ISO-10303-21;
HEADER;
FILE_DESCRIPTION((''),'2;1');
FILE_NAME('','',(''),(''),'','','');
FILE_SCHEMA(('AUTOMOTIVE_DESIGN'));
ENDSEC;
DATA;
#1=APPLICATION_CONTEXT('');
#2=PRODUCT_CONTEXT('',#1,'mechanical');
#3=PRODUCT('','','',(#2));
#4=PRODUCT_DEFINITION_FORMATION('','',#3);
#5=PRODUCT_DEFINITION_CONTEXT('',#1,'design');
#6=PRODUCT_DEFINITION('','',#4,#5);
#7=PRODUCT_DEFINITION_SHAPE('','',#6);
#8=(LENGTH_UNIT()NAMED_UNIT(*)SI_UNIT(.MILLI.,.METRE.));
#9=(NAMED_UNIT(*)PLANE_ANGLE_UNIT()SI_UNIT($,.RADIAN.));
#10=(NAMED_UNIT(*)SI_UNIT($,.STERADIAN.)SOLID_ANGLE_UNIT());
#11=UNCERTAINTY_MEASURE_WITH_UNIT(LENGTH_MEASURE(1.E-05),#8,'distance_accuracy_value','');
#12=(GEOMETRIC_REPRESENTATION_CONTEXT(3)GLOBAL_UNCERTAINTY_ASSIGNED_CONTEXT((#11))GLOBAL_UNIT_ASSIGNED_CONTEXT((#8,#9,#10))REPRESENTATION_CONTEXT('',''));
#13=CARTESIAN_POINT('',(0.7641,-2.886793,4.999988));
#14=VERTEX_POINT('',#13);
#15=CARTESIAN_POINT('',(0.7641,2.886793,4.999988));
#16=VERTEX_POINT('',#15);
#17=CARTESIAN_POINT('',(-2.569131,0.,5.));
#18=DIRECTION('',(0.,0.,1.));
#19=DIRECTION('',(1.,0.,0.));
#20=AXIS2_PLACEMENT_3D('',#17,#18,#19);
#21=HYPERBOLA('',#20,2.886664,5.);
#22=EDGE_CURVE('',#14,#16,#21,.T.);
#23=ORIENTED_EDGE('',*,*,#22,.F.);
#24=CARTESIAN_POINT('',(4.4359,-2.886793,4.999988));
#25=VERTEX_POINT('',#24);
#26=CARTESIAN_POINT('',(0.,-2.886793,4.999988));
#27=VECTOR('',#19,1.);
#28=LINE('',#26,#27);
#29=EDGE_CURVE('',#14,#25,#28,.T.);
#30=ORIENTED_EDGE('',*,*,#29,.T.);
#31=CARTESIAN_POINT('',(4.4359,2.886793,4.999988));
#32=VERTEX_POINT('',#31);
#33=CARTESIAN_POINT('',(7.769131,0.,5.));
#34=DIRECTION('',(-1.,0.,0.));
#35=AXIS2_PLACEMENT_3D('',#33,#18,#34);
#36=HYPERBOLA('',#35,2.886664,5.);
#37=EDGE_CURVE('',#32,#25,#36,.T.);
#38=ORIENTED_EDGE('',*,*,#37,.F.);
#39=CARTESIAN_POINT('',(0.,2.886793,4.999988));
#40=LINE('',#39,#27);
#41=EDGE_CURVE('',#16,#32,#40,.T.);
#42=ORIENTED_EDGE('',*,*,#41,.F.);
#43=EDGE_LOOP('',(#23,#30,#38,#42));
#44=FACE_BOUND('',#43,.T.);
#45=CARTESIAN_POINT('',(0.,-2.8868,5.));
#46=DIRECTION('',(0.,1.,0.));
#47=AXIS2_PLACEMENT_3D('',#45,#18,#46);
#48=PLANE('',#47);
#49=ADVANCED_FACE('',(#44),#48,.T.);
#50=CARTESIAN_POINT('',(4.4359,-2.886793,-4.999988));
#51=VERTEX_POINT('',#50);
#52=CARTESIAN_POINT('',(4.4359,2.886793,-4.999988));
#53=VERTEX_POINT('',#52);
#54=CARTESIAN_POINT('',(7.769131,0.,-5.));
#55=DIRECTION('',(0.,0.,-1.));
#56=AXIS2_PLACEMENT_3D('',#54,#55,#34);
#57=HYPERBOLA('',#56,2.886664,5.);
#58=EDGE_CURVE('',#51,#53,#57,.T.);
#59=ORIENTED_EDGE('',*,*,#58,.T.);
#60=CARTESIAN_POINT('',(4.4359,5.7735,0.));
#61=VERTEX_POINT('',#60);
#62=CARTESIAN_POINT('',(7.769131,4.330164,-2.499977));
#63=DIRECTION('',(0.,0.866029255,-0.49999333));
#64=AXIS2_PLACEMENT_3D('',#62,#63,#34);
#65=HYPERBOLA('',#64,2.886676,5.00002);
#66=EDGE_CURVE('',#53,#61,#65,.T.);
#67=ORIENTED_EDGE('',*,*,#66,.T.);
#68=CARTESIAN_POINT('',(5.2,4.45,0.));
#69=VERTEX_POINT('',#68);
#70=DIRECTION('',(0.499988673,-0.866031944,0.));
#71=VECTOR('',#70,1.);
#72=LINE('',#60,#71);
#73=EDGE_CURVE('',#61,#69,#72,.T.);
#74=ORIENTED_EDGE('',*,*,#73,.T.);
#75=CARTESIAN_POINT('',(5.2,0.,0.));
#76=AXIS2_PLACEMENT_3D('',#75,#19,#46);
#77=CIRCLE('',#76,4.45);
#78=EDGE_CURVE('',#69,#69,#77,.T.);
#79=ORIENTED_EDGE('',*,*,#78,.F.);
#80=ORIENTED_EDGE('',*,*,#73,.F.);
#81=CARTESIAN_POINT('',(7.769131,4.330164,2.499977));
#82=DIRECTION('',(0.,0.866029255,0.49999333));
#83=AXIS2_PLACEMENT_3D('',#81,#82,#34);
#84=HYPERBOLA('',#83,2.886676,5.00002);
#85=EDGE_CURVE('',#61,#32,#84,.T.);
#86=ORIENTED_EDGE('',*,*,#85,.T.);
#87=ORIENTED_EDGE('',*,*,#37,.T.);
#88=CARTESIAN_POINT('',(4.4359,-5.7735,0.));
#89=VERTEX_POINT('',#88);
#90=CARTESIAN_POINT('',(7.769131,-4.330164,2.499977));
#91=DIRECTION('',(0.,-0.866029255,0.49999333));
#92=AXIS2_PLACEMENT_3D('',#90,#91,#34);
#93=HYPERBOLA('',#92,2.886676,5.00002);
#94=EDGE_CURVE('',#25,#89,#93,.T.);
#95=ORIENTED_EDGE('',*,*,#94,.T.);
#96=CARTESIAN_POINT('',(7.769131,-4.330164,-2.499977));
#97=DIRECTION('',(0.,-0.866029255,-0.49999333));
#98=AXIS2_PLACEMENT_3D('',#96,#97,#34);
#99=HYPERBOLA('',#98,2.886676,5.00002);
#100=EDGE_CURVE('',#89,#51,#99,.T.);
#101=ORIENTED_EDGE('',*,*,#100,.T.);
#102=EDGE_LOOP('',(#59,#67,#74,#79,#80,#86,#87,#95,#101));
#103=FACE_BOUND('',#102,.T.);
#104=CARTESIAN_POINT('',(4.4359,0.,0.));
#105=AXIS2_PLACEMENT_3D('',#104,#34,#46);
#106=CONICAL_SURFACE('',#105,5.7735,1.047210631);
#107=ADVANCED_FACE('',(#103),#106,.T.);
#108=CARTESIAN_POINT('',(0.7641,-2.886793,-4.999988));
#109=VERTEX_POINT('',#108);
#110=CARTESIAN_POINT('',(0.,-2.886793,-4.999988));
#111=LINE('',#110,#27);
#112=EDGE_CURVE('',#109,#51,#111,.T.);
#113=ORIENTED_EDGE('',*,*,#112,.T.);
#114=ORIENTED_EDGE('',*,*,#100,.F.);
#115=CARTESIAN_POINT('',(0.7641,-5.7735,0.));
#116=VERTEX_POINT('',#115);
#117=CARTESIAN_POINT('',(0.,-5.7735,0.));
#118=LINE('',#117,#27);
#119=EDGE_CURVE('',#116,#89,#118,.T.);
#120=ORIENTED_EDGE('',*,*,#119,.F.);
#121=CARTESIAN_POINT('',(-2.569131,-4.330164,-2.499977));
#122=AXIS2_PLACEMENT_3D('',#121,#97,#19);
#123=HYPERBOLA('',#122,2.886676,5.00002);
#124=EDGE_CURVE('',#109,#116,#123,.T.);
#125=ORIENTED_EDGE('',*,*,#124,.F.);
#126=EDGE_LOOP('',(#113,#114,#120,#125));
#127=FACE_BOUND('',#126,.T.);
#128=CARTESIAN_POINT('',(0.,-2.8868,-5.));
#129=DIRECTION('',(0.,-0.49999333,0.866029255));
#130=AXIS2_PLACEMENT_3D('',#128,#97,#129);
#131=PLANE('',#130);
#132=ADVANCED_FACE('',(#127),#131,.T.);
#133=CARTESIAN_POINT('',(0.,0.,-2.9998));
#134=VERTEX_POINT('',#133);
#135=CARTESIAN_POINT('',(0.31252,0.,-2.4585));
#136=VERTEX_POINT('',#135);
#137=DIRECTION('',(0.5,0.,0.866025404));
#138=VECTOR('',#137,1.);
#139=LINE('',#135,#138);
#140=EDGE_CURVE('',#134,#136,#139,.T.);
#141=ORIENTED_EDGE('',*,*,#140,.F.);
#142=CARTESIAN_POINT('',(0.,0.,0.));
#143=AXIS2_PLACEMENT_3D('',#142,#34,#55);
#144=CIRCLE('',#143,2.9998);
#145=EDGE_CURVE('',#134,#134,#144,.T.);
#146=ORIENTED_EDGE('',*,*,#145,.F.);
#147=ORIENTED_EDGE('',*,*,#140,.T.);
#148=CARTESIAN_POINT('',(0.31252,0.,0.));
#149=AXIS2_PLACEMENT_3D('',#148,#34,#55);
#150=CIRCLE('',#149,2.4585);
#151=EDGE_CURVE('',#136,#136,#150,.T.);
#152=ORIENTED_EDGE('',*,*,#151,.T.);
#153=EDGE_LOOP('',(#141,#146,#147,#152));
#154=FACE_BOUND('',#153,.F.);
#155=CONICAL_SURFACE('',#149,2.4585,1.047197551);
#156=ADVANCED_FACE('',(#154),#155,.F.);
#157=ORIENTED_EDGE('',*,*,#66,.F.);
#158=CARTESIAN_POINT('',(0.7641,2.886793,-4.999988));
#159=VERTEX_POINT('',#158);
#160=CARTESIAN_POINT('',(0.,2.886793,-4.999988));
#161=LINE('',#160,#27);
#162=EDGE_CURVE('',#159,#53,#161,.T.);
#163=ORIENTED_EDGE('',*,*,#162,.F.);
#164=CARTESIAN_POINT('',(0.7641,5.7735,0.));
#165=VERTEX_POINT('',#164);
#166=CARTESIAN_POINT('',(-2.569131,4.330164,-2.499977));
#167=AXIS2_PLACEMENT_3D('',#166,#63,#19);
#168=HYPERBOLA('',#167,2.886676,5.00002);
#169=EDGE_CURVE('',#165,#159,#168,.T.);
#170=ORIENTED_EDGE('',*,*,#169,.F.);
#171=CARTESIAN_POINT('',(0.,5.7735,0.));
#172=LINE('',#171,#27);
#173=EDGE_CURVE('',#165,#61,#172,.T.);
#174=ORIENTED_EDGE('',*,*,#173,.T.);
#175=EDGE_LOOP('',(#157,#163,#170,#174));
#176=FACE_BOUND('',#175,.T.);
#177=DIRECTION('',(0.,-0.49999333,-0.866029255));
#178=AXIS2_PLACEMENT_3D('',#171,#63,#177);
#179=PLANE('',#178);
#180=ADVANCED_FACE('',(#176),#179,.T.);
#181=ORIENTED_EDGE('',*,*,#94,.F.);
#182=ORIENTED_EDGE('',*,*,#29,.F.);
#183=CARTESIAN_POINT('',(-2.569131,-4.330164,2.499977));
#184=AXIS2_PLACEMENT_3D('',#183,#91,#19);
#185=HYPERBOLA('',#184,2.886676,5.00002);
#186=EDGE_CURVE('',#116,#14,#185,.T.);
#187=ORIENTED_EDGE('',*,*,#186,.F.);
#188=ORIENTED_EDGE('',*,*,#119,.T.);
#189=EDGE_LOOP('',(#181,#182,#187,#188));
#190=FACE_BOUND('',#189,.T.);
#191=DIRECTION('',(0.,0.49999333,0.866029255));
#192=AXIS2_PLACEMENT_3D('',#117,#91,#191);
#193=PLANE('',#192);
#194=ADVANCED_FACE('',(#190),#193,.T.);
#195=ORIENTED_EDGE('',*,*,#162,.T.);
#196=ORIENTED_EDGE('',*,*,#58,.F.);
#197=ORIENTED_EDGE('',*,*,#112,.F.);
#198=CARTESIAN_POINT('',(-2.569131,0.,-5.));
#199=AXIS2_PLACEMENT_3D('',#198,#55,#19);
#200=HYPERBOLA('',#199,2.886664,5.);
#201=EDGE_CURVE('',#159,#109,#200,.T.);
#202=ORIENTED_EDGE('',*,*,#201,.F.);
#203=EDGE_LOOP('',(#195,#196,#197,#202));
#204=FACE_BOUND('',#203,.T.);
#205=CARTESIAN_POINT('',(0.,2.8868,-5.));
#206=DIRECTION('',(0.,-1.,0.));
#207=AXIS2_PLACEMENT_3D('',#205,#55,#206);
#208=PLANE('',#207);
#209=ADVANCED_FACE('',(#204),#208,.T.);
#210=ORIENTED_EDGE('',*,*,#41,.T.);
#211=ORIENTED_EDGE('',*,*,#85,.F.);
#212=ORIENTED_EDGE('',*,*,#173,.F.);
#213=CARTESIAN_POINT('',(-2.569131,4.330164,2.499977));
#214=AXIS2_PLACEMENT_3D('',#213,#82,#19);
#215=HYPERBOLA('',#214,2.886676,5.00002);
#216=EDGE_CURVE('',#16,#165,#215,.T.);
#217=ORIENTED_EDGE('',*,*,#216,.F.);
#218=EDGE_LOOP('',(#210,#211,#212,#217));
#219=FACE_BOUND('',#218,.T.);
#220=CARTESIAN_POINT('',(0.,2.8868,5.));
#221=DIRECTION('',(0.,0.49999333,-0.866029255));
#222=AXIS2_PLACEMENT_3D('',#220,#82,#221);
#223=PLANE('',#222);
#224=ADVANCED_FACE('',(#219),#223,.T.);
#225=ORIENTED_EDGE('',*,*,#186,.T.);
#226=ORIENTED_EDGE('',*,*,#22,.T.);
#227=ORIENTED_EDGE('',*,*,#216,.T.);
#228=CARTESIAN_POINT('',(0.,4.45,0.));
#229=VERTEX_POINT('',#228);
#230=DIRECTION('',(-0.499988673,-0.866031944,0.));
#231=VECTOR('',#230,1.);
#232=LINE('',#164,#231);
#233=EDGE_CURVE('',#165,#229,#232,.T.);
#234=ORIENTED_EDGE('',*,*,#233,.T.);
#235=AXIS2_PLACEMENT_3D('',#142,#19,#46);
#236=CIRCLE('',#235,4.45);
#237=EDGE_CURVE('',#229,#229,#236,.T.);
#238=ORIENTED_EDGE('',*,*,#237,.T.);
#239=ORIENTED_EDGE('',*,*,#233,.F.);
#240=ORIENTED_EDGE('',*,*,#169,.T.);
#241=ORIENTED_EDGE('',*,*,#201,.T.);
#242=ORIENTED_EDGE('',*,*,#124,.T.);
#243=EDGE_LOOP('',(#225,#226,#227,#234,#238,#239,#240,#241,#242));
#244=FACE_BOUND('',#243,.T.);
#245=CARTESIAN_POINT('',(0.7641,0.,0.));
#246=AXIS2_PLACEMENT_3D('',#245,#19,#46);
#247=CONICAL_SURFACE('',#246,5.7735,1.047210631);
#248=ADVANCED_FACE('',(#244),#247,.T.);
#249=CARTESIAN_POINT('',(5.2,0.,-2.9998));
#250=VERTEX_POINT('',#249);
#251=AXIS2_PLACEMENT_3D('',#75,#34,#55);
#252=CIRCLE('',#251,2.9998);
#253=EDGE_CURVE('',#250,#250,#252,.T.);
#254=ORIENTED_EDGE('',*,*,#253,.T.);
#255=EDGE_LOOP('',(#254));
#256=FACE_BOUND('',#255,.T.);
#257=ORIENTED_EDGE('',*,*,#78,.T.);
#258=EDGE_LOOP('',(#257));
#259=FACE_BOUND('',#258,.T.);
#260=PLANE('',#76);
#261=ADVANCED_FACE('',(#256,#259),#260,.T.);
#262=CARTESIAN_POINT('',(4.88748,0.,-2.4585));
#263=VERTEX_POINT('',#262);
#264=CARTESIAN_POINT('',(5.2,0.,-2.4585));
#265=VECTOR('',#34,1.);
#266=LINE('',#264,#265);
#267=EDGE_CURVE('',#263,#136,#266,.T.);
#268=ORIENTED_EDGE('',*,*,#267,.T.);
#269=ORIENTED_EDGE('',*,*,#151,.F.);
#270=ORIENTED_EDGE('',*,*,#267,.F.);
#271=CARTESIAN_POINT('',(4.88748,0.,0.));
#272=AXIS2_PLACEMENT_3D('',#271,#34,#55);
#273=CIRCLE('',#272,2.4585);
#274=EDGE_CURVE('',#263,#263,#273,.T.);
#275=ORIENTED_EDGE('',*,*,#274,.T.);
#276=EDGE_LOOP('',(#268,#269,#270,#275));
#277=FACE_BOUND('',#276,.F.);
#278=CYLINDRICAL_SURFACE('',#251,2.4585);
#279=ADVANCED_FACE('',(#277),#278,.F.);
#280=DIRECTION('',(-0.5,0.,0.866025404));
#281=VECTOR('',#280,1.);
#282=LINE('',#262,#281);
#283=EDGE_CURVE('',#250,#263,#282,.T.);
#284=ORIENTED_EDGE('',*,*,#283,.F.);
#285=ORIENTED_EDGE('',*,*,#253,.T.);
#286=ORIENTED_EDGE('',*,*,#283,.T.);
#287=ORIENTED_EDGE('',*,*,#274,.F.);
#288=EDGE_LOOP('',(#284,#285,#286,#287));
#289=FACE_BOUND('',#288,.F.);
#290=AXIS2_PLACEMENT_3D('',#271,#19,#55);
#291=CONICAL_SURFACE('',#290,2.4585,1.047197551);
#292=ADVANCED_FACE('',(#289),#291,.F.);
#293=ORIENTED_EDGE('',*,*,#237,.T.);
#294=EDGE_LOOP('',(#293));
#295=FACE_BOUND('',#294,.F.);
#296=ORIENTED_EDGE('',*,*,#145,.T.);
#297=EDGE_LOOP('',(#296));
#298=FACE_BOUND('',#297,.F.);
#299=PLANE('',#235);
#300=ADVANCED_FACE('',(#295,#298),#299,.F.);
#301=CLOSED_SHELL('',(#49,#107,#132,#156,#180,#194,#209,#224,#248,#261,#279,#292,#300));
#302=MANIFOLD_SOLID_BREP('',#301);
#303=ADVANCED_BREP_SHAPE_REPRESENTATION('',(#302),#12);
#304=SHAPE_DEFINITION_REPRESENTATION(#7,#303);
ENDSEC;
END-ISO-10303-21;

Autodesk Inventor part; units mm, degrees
ref_plane "YZ Plane" through (0, 0, 0) normal (1, 0, 0) x (0, 1, 0)
ref_plane "XZ Plane" through (0, 0, 0) normal (0, 1, 0) x (-1, 0, 0)
sketch "Sketch1" plane through (0, 0, 0) normal (1, 0, 0) x (0, 1, 0)
  line L0 (-5.7735, 0) -> (-2.8868, 5)
  line L1 (-2.8868, 5) -> (2.8868, 5)
  line L2 (2.8868, 5) -> (5.7735, 0)
  line L3 (5.7735, 0) -> (2.8868, -5)
  line L4 (2.8868, -5) -> (-2.8868, -5)
  line L5 (-2.8868, -5) -> (-5.7735, 0)
  point P0 (0, 0)
  point P1 (0, 0)
  dimension "d0" = 11.547
extrude "Body" add sketch "Sketch1" along normal blind 5.2
sketch "Sketch2" plane through (0, 0, 0) normal (0, 0, 1) x (1, 0, 0)
  line L0 (0, 2.8868) -> (0, 5.7735) projected
  line L1 (0, 5.7735) -> (5.2, 5.7735) projected
  line L2 (5.2, 2.8868) -> (5.2, 5.7735) projected
  line L3 (-0.52, 0) -> (6.76, 0) projected
  line L4 (0.7641, 5.7735) -> (0, 4.45)
  line L5 (4.4359, 5.7735) -> (5.2, 4.45)
  dimension "d3" = 30
  dimension "d4" = 30
  dimension "d5" = 8.9
  dimension "d6" = 8.9
revolve "Chamfer1" cut sketch "Sketch2" angle 360 about axis through (-10, 0, 0) along (1, 0, 0)
sketch "Sketch3" plane through (5.2, 0, 0) normal (1, 0, 0) x (0, 0, -1)
  arc A0 (-0.625, -1.0825) -> (0.625, -1.0825) centre (0, 0) ccw projected
hole "Thread" at (5.2, 0, 0) direction (-1, 0, 0) diameter 4.917 end through all thread size "M6x1" class "6H" standard "ISO Metric profile"
chamfer "Chamfer2" distance 0.5413 angle 30 1 edges at (5.2, 0, 2.4585) measured on face at (5.2, 3.7371, -0.4538)
chamfer "Chamfer3" distance 0.5413 angle 30 1 edges at (0, 0, 2.4585) measured on face at (0, 3.7371, -0.4538)
ref_plane "Work Plane1" through (-10.9812, 0, 0) normal (0, -0.8660254, -0.5) x (1, 0, 0)
equation "\"d0\" = 1.1547 * SW"
equation "\"d1\" = KOH"
equation "\"d3\" = ANG1"
equation "\"d4\" = ANG2"
equation "\"d5\" = SW0"
equation "\"d6\" = SW01"
equation "\"d8\" = -0.5 * GD1 + 0.5 * NND"
equation "\"d40\" = -0.5 * GD1 + 0.5 * NND"
equation "\"d10\" = -0.5 * GD1 + 0.5 * NND"
equation "\"d41\" = -0.5 * GD1 + 0.5 * NND"
equation "\"ANG1\" = 30deg"
equation "\"ANG2\" = 30deg"
equation "\"NND\" = 6"
equation "\"KOH\" = 5.2"
equation "\"SW0\" = 8.9"
equation "\"SW01\" = SW0"
equation "\"GUL\" = 0.541266 * PTC"
equation "\"THREADDIA\" = 6"
equation "\"TOA\" = 30deg"
equation "\"PTC\" = 1"
equation "\"E0\" = 1.155 * SW"
equation "\"GAL\" = 0.541266 * PTC"
equation "\"SW\" = 10"
equation "\"GD1\" = 4.917468"
properties part number "100010" material "Steel, Mild"
